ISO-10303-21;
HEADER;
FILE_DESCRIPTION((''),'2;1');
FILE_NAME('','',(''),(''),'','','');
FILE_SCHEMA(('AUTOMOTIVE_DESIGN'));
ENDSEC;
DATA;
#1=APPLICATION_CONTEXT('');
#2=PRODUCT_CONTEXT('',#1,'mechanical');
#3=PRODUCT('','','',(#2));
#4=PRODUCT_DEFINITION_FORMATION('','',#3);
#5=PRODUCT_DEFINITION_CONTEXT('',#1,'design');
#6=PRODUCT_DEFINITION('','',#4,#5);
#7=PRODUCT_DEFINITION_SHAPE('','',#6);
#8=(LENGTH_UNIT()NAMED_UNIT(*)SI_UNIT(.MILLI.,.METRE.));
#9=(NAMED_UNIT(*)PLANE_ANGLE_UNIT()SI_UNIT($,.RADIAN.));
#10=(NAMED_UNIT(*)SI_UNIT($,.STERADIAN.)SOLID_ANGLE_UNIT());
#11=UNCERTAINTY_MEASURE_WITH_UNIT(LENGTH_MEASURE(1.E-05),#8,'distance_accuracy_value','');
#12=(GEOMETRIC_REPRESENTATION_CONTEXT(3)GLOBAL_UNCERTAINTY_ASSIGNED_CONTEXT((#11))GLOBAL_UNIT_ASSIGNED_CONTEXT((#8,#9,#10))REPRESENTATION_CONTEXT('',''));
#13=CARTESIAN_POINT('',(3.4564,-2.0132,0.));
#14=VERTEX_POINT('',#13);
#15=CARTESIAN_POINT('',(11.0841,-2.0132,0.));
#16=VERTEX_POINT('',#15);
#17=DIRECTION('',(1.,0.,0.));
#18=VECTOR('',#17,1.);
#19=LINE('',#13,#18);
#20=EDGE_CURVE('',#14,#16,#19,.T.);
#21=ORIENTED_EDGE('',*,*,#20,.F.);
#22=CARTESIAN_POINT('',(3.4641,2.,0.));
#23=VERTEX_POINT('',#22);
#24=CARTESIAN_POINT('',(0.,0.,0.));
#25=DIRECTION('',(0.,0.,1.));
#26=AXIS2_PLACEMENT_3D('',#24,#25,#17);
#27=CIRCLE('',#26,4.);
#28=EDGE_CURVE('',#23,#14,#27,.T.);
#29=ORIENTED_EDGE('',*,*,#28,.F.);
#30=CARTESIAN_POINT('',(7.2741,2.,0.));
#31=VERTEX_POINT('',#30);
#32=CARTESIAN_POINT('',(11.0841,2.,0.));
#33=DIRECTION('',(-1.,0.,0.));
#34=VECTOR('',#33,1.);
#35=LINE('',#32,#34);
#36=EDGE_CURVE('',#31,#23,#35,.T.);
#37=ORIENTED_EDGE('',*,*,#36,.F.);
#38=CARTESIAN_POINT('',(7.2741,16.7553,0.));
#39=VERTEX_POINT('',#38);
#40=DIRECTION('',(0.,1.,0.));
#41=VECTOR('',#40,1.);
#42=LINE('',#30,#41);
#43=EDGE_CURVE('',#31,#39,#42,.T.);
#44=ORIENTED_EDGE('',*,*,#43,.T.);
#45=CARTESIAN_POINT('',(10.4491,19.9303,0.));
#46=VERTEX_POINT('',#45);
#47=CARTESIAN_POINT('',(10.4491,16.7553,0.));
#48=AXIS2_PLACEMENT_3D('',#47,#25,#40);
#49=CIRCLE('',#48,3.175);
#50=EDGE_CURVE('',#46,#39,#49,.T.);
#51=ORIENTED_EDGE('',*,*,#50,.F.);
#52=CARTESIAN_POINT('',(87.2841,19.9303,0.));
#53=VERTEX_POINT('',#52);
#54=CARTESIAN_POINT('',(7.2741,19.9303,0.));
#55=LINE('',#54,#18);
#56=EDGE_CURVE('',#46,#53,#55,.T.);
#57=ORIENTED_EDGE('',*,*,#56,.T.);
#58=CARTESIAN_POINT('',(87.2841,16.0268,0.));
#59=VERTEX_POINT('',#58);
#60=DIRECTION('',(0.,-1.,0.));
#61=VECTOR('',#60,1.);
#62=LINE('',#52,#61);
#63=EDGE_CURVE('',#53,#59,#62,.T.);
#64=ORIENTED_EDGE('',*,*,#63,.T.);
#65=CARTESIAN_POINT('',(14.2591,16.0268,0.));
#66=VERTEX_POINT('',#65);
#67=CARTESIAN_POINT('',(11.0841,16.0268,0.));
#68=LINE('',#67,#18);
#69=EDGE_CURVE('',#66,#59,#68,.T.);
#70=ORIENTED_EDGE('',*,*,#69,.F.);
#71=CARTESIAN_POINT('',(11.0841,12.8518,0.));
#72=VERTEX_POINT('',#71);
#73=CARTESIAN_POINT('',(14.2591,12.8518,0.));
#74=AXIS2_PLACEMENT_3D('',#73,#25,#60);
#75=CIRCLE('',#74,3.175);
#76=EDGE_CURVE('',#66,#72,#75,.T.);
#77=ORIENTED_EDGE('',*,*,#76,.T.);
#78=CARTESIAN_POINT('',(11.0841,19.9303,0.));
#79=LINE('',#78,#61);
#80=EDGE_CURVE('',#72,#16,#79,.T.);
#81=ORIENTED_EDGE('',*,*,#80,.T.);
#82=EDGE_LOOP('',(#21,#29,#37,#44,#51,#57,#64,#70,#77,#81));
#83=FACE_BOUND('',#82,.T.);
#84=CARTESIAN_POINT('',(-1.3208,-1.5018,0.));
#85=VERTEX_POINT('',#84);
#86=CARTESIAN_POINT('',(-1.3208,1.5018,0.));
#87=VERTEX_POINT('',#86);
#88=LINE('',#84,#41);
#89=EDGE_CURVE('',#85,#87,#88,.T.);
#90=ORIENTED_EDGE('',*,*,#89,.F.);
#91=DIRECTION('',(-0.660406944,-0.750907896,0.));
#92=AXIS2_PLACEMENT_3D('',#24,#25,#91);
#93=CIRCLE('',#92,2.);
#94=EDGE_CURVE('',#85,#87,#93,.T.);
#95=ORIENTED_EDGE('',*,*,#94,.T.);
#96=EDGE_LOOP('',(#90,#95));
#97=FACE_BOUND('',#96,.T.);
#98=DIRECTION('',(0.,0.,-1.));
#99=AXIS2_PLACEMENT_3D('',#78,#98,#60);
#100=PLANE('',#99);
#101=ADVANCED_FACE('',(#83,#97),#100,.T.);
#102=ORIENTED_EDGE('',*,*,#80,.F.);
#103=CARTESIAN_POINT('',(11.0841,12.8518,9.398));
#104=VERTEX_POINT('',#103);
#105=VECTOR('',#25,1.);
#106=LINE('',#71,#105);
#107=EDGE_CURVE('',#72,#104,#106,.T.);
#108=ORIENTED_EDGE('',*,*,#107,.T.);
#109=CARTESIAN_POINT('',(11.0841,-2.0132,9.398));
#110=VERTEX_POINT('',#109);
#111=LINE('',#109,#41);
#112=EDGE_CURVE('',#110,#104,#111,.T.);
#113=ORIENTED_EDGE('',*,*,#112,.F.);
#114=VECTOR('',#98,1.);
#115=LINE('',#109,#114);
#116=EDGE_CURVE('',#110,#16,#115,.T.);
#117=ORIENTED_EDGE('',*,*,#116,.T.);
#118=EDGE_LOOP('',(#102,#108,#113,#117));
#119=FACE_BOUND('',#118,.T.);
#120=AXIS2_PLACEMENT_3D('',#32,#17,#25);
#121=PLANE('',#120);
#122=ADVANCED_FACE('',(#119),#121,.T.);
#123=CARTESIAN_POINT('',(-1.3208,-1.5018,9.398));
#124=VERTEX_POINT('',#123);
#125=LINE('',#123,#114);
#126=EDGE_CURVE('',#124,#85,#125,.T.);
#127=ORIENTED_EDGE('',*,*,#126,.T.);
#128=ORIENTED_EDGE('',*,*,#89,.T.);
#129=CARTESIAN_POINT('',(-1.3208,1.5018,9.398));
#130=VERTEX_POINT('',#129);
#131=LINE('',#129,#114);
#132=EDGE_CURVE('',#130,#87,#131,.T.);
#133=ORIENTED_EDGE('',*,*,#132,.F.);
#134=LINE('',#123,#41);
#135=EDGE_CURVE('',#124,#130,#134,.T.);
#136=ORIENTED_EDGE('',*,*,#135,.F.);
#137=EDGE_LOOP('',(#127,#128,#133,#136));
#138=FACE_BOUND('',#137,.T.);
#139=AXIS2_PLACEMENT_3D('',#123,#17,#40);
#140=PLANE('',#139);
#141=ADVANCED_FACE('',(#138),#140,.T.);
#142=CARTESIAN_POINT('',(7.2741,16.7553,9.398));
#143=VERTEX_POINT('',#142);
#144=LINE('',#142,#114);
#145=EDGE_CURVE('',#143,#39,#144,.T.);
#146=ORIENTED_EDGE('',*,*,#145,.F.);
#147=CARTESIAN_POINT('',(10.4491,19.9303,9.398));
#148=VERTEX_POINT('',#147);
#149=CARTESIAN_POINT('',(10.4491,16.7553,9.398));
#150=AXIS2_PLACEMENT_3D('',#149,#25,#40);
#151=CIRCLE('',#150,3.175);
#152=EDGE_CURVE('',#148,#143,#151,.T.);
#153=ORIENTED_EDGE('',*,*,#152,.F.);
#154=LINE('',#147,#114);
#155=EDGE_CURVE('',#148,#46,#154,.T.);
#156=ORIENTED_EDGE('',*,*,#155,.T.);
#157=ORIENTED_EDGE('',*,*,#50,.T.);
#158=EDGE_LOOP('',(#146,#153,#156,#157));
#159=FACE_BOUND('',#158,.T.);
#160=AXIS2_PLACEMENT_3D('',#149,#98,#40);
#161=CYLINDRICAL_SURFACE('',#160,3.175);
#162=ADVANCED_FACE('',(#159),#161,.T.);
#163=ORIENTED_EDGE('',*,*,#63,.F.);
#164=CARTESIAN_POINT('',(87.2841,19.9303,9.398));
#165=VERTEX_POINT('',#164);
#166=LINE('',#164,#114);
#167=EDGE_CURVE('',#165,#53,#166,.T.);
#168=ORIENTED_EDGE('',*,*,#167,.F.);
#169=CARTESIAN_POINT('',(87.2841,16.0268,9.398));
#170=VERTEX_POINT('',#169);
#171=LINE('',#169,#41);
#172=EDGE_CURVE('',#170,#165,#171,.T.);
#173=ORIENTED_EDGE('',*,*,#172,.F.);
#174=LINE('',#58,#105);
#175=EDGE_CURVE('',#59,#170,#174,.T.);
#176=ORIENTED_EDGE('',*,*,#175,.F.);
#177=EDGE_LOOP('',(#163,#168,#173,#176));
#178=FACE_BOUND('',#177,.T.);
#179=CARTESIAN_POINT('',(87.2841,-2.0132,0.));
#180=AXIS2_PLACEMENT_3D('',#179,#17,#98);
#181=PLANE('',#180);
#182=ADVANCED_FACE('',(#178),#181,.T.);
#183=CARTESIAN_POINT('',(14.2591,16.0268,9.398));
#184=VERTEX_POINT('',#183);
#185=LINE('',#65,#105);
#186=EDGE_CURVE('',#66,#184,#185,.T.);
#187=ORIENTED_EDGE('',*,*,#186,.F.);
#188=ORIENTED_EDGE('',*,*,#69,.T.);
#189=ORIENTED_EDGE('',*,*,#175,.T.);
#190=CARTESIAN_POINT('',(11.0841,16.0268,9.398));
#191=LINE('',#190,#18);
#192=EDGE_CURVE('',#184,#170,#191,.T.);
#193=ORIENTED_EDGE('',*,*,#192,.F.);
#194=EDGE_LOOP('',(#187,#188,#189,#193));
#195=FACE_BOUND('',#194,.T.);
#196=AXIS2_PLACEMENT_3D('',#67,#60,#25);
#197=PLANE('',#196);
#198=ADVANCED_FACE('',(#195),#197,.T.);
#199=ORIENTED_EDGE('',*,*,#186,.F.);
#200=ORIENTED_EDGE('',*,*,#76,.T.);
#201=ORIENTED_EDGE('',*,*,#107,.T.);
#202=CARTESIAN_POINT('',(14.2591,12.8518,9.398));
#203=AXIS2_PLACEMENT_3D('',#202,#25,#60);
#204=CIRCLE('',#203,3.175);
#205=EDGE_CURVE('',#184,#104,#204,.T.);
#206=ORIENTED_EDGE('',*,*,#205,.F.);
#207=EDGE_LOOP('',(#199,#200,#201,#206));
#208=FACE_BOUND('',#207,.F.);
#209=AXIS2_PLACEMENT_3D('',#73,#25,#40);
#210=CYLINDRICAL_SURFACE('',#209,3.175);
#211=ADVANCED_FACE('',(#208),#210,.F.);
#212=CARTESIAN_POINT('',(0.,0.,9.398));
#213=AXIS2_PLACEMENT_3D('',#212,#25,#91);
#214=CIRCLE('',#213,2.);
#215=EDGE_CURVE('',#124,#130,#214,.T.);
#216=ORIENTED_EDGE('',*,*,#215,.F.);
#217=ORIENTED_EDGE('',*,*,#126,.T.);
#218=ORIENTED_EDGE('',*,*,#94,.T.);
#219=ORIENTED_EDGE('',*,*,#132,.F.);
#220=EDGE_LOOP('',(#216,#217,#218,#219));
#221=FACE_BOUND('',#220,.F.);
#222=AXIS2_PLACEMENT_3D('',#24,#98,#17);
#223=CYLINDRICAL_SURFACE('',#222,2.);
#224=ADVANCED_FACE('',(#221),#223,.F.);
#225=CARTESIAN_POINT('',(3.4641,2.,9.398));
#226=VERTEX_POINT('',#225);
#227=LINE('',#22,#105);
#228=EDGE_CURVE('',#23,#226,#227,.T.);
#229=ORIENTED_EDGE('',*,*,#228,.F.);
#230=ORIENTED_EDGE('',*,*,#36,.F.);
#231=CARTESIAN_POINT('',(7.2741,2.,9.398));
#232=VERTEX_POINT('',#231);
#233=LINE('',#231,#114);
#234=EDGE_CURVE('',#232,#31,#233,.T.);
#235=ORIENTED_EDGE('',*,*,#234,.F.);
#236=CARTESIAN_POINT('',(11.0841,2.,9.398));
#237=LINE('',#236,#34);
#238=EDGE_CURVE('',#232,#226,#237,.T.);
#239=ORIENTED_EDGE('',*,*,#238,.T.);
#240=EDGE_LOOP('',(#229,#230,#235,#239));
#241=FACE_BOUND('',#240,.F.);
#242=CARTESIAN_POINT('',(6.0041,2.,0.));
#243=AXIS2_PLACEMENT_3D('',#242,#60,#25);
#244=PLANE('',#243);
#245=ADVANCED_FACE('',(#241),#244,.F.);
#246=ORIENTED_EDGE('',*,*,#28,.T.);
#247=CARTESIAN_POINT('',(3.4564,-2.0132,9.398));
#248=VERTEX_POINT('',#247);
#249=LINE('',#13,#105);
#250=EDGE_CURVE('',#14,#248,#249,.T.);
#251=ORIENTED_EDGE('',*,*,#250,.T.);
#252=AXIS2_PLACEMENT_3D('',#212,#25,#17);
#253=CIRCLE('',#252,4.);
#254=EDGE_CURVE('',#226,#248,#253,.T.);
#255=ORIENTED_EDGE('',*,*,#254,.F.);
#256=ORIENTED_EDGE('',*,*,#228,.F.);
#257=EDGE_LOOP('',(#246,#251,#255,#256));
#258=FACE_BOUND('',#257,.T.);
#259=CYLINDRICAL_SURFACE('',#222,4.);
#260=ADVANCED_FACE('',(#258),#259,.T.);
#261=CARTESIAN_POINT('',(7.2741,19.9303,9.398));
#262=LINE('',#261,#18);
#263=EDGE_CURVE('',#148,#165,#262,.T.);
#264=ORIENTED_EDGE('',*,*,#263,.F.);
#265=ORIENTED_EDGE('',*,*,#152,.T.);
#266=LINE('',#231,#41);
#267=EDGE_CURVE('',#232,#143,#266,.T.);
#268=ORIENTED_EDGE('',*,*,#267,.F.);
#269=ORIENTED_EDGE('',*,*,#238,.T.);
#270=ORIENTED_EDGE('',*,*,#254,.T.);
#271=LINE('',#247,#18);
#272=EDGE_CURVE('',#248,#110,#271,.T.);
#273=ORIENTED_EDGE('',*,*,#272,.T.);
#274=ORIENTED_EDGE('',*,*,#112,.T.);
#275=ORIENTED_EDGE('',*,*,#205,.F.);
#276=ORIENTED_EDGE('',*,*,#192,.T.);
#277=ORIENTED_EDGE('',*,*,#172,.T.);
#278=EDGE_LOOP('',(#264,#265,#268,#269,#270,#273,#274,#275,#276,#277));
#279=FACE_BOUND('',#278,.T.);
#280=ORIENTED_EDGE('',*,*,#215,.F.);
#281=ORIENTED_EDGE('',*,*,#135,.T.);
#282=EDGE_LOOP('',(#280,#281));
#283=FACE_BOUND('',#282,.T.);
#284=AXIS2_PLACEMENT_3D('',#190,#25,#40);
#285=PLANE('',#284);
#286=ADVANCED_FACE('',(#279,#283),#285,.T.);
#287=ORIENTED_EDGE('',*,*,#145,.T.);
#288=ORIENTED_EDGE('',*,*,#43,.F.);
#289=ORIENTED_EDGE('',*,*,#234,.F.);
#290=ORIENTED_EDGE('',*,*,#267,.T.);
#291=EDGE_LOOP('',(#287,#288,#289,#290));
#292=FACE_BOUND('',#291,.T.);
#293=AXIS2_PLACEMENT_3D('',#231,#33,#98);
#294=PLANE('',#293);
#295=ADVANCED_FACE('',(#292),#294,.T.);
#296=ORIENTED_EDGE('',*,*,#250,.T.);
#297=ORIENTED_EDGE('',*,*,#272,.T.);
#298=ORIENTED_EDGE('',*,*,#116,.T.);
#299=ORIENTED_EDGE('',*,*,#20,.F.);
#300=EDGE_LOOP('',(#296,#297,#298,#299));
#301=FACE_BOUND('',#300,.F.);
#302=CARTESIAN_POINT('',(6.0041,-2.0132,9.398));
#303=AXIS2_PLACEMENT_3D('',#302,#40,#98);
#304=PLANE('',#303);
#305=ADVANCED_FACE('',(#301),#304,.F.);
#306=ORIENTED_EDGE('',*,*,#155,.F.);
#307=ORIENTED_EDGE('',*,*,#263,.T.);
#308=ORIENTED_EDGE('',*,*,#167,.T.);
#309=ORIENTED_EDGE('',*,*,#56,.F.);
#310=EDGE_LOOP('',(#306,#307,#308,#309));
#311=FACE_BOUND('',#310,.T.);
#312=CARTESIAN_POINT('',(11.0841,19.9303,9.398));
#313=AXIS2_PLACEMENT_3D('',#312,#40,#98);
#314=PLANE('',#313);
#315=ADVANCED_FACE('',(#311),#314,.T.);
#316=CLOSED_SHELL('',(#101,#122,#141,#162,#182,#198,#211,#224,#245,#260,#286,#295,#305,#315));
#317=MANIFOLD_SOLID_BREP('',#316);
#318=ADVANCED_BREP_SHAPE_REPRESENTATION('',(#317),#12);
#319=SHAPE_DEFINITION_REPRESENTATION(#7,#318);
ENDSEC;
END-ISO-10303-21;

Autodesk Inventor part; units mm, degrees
ref_plane "YZ Plane" through (0, 0, 0) normal (1, 0, 0) x (0, 1, 0)
ref_plane "XZ Plane" through (0, 0, 0) normal (0, 1, 0) x (-1, 0, 0)
ref_plane "XY Plane" through (0, 0, 0) normal (0, 0, 1) x (1, 0, 0)
sketch "Sketch2" plane through (0, 0, 0) normal (0, 0, 1) x (1, 0, 0)
  circle A0 centre (0, 0) radius 2
  circle A1 centre (0, 0) radius 4
  line L0 (3.4641, 2) -> (6.0041, 2)
  line L1 (6.0041, 2) -> (6.0041, -2.0132)
  line L2 (6.0041, -2.0132) -> (3.4564, -2.0132)
  line L3 (-1.3208, -1.5018) -> (-1.3208, 1.5018)
  dimension "d7" = 4
  dimension "d8" = 8
  dimension "d9" = 2.54
  dimension "d10" = 4.0132
  dimension "d11" = 2
  dimension "d25" = 1.3208
extrude "Extrusion2" add sketch "Sketch2" along normal blind 9.398
sketch "Sketch3" plane through (6.0041, -2.0132, 0) normal (1, 0, 0) x (0, 0, -1)
  line L0 (-9.398, 0) -> (-9.398, 4.0132) projected
  line L1 (-9.398, 4.0132) -> (-9.398, 0)
  line L2 (-9.398, 0) -> (0, 0)
  line L3 (0, 0) -> (0, 4.0132) projected
  line L4 (0, 0) -> (0, 4.0132)
  line L5 (0, 4.0132) -> (-9.398, 4.0132) projected
  line L6 (0, 4.0132) -> (-9.398, 4.0132)
  point P0 (0, 2.0132)
extrude "Extrusion3" add sketch "Sketch3" along normal blind 5.08
sketch "Sketch4" plane through (3.4641, 2, 9.398) normal (0, 1, 0) x (1, 0, 0)
  line L0 (0, 0) -> (7.62, 0) projected
  line L1 (7.62, 0) -> (3.81, 0)
  line L2 (3.81, 0) -> (3.81, 9.398)
  line L3 (3.81, 9.398) -> (7.62, 9.398)
  line L4 (7.62, 9.398) -> (7.62, 0)
  point P0 (-3.4641, 9.398)
  dimension "d16" = 3.81
  dimension "d17" = 9.398
extrude "Extrusion4" add sketch "Sketch4" along normal blind 17.9303
sketch "Sketch5" plane through (11.0841, -2.0132, 0) normal (1, 0, 0) x (0, 0, -1)
  line L0 (0, 21.9435) -> (0, 18.04)
  line L1 (0, 18.04) -> (-9.398, 18.04)
  line L2 (-9.398, 18.04) -> (-9.398, 21.9435)
  line L3 (0, 0) -> (0, 21.9435) projected
  line L4 (-9.398, 21.9435) -> (0, 21.9435)
  point P0 (0, 2.0132)
  point P1 (-9.398, 21.9435)
  dimension "d29" = 9.398
  dimension "d30" = 3.9035
  dimension "d31" = 3.9035
extrude "Extrusion5" add sketch "Sketch5" along normal blind 76.2
fillet "Fillet1" radius 3.175 1 edges at (7.2741, 19.9303, 4.699)
fillet "Fillet2" radius 3.175 1 edges at (11.0841, 16.0268, 4.699)
sketch "Sketch6" plane through (0, 0, 9.398) normal (0, 0, 1) x (1, 0, 0)
  circle A0 centre (0, 0) radius 2 projected
  line L0 (-1.3208, -1.5018) -> (-1.3208, 1.5018)
  arc A1 (-1.3208, 1.5018) -> (-1.3208, -1.5018) centre (0, 0) ccw
  dimension "d26" = 1.3208
extrude "Extrusion6" add sketch "Sketch6" against normal blind 9.398 contours L0 A0 picked at (-1.5423, 0.0807)
properties part number "Rotator"
